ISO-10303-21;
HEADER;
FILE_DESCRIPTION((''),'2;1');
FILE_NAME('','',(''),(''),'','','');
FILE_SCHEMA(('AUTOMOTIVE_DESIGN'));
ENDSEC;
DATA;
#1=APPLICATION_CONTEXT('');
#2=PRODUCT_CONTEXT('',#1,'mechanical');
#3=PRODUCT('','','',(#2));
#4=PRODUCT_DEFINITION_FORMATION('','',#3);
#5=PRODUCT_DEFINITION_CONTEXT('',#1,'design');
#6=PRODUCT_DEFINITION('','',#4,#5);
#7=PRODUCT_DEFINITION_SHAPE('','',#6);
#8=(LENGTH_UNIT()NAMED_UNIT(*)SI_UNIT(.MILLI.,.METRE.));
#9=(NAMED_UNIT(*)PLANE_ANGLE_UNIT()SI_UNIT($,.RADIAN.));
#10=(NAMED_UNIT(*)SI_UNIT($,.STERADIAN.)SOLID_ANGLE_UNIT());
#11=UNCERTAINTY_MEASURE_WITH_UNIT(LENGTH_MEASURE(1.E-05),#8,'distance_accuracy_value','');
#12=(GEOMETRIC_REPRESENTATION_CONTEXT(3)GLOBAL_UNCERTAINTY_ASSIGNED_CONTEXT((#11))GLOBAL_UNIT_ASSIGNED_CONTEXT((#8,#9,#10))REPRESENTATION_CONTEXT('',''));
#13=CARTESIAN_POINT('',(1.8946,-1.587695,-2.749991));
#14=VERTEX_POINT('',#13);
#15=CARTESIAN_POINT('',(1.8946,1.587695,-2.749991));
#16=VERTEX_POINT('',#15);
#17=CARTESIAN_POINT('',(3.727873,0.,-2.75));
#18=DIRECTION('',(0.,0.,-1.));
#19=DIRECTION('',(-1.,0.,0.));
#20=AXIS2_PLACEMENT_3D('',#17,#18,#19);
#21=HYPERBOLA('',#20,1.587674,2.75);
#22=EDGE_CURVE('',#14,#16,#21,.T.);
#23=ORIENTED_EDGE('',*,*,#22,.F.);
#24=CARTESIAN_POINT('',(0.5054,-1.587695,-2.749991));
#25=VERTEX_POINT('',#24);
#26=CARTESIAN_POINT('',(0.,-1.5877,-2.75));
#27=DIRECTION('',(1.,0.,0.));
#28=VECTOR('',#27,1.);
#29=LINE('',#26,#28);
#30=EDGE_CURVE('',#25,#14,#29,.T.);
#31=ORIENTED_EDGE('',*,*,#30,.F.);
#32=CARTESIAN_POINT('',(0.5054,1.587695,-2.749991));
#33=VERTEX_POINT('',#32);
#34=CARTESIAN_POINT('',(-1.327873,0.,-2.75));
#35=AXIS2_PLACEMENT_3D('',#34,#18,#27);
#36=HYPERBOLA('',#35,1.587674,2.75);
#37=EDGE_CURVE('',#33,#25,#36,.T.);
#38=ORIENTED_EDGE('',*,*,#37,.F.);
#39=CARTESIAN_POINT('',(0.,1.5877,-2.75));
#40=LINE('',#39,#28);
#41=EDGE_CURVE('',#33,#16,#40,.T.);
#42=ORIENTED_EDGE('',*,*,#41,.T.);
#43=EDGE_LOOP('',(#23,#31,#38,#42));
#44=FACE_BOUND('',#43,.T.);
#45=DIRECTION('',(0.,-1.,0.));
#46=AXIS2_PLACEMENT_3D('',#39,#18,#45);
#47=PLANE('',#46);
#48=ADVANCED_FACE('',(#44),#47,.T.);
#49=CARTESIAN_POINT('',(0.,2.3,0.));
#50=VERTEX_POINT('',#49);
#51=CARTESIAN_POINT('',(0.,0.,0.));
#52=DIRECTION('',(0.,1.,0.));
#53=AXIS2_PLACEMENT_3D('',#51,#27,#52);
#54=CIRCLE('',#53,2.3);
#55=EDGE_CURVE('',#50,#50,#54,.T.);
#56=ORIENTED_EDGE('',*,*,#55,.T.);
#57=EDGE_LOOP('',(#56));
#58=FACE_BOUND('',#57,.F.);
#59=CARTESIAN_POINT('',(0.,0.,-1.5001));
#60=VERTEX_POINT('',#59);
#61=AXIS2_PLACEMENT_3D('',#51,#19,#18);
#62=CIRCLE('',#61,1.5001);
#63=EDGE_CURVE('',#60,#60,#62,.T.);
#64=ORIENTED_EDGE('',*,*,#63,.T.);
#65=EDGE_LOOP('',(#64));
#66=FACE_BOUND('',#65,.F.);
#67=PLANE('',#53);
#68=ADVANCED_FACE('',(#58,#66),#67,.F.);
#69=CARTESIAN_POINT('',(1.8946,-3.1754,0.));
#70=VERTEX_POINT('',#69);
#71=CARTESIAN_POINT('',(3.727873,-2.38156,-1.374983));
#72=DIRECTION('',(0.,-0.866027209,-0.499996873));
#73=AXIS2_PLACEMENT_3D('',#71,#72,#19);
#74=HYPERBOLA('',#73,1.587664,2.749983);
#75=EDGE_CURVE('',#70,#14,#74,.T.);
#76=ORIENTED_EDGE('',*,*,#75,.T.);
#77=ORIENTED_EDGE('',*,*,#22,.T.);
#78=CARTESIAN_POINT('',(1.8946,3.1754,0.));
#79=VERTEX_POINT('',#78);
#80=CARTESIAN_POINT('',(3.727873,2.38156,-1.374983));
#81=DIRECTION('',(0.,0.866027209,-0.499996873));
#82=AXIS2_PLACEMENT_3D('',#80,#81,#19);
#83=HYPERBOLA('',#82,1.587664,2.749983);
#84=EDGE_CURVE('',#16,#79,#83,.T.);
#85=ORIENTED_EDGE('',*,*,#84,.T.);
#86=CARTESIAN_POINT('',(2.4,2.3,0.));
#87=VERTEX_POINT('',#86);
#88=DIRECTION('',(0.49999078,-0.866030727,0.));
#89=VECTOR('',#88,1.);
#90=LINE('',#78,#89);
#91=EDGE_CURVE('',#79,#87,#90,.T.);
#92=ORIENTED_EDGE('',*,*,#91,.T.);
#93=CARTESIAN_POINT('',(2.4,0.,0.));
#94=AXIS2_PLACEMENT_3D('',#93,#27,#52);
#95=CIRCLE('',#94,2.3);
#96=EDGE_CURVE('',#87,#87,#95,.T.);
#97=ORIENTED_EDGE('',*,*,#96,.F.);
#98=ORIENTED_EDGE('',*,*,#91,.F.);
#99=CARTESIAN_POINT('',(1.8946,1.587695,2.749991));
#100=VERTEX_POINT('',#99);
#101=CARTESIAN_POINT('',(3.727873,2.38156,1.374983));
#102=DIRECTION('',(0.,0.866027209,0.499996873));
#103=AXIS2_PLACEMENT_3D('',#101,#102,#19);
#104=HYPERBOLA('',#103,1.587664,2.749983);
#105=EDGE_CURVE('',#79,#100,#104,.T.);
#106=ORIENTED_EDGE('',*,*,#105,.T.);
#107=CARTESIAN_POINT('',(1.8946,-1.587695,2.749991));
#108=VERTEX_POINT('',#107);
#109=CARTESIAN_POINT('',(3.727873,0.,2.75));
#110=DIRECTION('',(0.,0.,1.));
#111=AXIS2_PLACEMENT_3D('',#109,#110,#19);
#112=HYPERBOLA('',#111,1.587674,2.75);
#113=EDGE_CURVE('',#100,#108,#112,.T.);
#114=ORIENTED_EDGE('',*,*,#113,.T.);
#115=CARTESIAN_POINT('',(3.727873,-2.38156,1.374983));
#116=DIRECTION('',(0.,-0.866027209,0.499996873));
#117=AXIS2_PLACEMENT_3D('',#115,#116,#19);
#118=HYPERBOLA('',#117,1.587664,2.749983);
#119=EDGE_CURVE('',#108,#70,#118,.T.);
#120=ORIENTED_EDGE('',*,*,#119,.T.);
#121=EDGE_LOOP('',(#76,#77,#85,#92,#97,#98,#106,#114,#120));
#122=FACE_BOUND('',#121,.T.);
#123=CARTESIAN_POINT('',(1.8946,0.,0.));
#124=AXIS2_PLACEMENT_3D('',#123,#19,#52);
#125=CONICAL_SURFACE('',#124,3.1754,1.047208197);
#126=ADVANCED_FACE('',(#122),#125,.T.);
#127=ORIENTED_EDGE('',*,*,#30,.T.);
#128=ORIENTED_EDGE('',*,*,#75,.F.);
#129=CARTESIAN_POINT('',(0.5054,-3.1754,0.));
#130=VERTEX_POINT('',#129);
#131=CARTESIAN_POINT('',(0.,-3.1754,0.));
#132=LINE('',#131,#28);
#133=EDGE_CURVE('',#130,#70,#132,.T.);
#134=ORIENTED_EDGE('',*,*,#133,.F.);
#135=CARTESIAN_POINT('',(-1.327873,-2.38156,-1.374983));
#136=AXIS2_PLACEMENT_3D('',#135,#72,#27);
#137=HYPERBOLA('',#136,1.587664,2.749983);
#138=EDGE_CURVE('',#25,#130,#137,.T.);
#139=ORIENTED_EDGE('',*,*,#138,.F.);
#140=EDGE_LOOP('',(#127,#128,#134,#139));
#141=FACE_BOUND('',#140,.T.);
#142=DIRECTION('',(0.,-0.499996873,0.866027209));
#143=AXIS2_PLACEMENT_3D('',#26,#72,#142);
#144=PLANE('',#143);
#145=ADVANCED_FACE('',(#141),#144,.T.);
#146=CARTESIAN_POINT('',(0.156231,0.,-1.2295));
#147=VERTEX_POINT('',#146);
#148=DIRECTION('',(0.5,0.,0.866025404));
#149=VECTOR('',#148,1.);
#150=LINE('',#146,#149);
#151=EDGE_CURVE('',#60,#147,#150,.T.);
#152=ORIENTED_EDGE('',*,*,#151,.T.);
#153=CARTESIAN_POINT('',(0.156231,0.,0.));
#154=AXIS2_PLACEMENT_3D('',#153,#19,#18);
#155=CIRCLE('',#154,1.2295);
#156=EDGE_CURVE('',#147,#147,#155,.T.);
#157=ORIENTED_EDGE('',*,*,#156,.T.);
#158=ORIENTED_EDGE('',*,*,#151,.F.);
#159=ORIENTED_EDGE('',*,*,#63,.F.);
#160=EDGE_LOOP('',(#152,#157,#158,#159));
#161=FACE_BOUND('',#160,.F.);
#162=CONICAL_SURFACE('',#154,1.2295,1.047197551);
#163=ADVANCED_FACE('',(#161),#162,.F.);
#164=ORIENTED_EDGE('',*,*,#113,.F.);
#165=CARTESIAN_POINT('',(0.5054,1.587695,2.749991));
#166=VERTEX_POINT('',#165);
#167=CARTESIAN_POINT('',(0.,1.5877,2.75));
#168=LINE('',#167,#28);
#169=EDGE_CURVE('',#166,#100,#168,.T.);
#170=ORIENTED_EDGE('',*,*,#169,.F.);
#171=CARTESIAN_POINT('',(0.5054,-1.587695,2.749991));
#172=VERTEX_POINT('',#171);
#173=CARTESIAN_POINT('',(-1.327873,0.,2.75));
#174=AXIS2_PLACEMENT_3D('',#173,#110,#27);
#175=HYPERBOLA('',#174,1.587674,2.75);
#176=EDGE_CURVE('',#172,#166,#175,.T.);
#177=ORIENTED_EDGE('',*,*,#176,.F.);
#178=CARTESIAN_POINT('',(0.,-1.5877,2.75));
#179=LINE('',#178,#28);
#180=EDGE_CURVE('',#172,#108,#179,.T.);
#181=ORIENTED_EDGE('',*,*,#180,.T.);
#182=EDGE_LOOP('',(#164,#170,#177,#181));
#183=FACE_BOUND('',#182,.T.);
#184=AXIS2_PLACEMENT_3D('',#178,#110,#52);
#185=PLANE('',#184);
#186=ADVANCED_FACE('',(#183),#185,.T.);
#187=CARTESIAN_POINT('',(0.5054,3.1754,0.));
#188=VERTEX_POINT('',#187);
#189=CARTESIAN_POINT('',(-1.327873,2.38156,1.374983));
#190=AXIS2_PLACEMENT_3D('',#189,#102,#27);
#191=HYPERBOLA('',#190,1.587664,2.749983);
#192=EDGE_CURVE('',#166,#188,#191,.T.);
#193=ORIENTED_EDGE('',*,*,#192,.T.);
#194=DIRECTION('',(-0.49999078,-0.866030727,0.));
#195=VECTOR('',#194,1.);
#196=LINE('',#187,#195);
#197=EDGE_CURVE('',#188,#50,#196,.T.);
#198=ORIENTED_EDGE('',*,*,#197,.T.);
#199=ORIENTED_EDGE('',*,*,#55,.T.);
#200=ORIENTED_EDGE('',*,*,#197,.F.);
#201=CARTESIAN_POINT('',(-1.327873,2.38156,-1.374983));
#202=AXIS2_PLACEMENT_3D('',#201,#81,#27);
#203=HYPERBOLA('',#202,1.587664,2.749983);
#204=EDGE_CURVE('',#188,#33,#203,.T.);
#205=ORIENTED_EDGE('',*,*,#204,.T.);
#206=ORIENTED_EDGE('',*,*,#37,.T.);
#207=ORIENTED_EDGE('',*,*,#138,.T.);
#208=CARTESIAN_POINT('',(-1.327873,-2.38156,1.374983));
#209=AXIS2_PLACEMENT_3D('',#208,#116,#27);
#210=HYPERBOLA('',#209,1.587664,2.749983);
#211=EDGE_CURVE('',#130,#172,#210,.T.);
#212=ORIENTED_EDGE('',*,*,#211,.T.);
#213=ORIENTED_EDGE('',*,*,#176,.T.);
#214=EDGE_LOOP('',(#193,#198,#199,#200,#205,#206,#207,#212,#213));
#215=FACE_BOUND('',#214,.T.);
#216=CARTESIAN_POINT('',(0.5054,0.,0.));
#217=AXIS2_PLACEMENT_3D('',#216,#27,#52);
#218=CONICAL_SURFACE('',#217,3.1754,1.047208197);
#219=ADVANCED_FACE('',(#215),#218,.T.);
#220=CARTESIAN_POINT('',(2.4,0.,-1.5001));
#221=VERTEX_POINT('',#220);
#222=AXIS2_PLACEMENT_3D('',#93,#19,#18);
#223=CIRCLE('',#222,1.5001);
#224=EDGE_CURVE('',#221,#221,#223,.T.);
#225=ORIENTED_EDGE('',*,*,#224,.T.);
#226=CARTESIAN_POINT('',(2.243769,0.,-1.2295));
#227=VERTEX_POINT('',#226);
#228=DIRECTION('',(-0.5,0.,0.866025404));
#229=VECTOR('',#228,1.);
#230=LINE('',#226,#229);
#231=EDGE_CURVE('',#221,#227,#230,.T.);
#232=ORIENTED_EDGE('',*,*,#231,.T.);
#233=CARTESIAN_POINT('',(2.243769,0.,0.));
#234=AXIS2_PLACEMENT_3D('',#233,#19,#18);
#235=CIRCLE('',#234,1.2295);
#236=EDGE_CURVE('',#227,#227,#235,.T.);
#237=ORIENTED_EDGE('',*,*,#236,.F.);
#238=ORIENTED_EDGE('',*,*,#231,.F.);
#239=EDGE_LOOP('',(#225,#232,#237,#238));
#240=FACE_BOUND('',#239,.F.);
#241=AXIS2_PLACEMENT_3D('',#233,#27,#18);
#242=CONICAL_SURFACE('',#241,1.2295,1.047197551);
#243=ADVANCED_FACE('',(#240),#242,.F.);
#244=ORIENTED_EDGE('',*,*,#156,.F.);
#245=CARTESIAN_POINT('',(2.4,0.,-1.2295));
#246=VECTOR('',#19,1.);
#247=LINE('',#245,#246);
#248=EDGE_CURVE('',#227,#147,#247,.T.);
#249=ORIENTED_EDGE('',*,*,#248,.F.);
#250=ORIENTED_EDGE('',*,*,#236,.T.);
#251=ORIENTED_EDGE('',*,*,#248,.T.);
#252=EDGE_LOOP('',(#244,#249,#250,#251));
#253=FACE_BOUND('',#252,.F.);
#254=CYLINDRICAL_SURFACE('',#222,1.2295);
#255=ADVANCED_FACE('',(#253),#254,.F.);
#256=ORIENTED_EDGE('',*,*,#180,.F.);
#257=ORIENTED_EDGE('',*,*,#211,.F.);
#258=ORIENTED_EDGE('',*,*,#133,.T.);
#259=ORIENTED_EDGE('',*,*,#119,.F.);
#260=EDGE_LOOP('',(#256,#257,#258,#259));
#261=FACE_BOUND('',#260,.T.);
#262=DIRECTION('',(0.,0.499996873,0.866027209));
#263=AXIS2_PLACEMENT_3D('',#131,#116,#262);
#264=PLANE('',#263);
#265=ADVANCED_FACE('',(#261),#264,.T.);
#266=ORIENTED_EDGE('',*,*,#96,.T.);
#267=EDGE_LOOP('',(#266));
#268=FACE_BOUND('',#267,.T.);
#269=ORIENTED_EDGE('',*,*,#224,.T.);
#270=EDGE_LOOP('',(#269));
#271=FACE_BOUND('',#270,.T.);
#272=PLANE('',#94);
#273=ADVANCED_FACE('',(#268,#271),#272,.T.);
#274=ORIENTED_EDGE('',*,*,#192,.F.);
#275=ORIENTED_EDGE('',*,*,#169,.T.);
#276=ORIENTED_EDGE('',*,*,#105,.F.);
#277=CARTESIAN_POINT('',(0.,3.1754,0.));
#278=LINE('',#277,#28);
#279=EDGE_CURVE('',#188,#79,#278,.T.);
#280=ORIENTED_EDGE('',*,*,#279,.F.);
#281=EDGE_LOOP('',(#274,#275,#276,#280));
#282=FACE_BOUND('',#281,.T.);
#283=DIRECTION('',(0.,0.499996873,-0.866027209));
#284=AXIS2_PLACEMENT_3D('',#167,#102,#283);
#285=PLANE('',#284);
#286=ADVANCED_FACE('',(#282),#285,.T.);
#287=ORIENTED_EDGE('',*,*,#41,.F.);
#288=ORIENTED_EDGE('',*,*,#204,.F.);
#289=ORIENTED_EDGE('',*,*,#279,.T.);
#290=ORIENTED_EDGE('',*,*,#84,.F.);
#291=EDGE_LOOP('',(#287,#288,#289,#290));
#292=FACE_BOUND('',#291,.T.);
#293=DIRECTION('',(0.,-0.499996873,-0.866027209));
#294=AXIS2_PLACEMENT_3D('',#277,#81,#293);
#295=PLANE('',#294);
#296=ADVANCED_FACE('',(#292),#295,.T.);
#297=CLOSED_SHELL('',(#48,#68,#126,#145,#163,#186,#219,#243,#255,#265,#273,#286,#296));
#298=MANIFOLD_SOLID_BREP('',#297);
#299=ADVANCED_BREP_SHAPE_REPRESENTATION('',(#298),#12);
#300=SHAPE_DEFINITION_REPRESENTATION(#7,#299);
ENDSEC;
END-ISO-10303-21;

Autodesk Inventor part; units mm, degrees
ref_plane "YZ Plane" through (0, 0, 0) normal (1, 0, 0) x (0, 1, 0)
ref_plane "XZ Plane" through (0, 0, 0) normal (0, 1, 0) x (-1, 0, 0)
sketch "Sketch1" plane through (0, 0, 0) normal (1, 0, 0) x (0, 1, 0)
  line L0 (-3.1754, 0) -> (-1.5877, 2.75)
  line L1 (-1.5877, 2.75) -> (1.5877, 2.75)
  line L2 (1.5877, 2.75) -> (3.1754, 0)
  line L3 (3.1754, 0) -> (1.5877, -2.75)
  line L4 (1.5877, -2.75) -> (-1.5877, -2.75)
  line L5 (-1.5877, -2.75) -> (-3.1754, 0)
  point P0 (0, 0)
  point P1 (0, 0)
  dimension "d0" = 6.3509
extrude "Body" add sketch "Sketch1" along normal blind 2.4
sketch "Sketch2" plane through (0, 0, 0) normal (0, 0, 1) x (1, 0, 0)
  line L0 (0, 1.5877) -> (0, 3.1754) projected
  line L1 (0, 3.1754) -> (2.4, 3.1754) projected
  line L2 (2.4, 1.5877) -> (2.4, 3.1754) projected
  line L3 (-0.48, 0) -> (2.88, 0) projected
  line L4 (0.5054, 3.1754) -> (0, 2.3)
  line L5 (1.8946, 3.1754) -> (2.4, 2.3)
  dimension "d3" = 30
  dimension "d4" = 30
  dimension "d5" = 4.6
  dimension "d6" = 4.6
revolve "Chamfer1" cut sketch "Sketch2" angle 360 about axis through (-10, 0, 0) along (1, 0, 0)
sketch "Sketch3" plane through (2.4, 0, 0) normal (1, 0, 0) x (0, 0, -1)
  arc A0 (-0.625, -1.0825) -> (0.625, -1.0825) centre (0, 0) ccw projected
hole "Thread" at (2.4, 0, 0) direction (-1, 0, 0) diameter 2.459 end through all thread size "M3x0.5" designation "M3" class "6H" standard "ISO Metric profile"
chamfer "Chamfer2" distance 0.2706 angle 30 1 edges at (2.4, 0, 1.2295) measured on face at (2.4, 1.9179, -0.2329)
chamfer "Chamfer3" distance 0.2706 angle 30 1 edges at (0, 0, 1.2295) measured on face at (0, 1.9179, -0.2329)
ref_plane "Work Plane1" through (-6.3375, 0, 0) normal (0, -0.8660254, -0.5) x (1, 0, 0)
equation "\"d0\" = 1.1547 * SW"
equation "\"d1\" = KOH"
equation "\"d3\" = ANG1"
equation "\"d4\" = ANG2"
equation "\"d5\" = SW0"
equation "\"d6\" = SW01"
equation "\"d8\" = -0.5 * GD1 + 0.5 * NND"
equation "\"d40\" = -0.5 * GD1 + 0.5 * NND"
equation "\"d10\" = -0.5 * GD1 + 0.5 * NND"
equation "\"d41\" = -0.5 * GD1 + 0.5 * NND"
equation "\"ANG1\" = 30deg"
equation "\"ANG2\" = 30deg"
equation "\"NND\" = 3"
equation "\"KOH\" = 2.4"
equation "\"SW\" = 5.5"
equation "\"SW0\" = 4.6"
equation "\"SW01\" = SW0"
equation "\"GUL\" = 0.541266 * PTC"
equation "\"THREADDIA\" = 3"
equation "\"TOA\" = 30deg"
equation "\"PTC\" = 0.5"
equation "\"E0\" = 1.155 * SW"
equation "\"GAL\" = 0.541266 * PTC"
equation "\"GD1\" = 2.458734"
properties part number "ISO 4032 - M3" material "Steel"
